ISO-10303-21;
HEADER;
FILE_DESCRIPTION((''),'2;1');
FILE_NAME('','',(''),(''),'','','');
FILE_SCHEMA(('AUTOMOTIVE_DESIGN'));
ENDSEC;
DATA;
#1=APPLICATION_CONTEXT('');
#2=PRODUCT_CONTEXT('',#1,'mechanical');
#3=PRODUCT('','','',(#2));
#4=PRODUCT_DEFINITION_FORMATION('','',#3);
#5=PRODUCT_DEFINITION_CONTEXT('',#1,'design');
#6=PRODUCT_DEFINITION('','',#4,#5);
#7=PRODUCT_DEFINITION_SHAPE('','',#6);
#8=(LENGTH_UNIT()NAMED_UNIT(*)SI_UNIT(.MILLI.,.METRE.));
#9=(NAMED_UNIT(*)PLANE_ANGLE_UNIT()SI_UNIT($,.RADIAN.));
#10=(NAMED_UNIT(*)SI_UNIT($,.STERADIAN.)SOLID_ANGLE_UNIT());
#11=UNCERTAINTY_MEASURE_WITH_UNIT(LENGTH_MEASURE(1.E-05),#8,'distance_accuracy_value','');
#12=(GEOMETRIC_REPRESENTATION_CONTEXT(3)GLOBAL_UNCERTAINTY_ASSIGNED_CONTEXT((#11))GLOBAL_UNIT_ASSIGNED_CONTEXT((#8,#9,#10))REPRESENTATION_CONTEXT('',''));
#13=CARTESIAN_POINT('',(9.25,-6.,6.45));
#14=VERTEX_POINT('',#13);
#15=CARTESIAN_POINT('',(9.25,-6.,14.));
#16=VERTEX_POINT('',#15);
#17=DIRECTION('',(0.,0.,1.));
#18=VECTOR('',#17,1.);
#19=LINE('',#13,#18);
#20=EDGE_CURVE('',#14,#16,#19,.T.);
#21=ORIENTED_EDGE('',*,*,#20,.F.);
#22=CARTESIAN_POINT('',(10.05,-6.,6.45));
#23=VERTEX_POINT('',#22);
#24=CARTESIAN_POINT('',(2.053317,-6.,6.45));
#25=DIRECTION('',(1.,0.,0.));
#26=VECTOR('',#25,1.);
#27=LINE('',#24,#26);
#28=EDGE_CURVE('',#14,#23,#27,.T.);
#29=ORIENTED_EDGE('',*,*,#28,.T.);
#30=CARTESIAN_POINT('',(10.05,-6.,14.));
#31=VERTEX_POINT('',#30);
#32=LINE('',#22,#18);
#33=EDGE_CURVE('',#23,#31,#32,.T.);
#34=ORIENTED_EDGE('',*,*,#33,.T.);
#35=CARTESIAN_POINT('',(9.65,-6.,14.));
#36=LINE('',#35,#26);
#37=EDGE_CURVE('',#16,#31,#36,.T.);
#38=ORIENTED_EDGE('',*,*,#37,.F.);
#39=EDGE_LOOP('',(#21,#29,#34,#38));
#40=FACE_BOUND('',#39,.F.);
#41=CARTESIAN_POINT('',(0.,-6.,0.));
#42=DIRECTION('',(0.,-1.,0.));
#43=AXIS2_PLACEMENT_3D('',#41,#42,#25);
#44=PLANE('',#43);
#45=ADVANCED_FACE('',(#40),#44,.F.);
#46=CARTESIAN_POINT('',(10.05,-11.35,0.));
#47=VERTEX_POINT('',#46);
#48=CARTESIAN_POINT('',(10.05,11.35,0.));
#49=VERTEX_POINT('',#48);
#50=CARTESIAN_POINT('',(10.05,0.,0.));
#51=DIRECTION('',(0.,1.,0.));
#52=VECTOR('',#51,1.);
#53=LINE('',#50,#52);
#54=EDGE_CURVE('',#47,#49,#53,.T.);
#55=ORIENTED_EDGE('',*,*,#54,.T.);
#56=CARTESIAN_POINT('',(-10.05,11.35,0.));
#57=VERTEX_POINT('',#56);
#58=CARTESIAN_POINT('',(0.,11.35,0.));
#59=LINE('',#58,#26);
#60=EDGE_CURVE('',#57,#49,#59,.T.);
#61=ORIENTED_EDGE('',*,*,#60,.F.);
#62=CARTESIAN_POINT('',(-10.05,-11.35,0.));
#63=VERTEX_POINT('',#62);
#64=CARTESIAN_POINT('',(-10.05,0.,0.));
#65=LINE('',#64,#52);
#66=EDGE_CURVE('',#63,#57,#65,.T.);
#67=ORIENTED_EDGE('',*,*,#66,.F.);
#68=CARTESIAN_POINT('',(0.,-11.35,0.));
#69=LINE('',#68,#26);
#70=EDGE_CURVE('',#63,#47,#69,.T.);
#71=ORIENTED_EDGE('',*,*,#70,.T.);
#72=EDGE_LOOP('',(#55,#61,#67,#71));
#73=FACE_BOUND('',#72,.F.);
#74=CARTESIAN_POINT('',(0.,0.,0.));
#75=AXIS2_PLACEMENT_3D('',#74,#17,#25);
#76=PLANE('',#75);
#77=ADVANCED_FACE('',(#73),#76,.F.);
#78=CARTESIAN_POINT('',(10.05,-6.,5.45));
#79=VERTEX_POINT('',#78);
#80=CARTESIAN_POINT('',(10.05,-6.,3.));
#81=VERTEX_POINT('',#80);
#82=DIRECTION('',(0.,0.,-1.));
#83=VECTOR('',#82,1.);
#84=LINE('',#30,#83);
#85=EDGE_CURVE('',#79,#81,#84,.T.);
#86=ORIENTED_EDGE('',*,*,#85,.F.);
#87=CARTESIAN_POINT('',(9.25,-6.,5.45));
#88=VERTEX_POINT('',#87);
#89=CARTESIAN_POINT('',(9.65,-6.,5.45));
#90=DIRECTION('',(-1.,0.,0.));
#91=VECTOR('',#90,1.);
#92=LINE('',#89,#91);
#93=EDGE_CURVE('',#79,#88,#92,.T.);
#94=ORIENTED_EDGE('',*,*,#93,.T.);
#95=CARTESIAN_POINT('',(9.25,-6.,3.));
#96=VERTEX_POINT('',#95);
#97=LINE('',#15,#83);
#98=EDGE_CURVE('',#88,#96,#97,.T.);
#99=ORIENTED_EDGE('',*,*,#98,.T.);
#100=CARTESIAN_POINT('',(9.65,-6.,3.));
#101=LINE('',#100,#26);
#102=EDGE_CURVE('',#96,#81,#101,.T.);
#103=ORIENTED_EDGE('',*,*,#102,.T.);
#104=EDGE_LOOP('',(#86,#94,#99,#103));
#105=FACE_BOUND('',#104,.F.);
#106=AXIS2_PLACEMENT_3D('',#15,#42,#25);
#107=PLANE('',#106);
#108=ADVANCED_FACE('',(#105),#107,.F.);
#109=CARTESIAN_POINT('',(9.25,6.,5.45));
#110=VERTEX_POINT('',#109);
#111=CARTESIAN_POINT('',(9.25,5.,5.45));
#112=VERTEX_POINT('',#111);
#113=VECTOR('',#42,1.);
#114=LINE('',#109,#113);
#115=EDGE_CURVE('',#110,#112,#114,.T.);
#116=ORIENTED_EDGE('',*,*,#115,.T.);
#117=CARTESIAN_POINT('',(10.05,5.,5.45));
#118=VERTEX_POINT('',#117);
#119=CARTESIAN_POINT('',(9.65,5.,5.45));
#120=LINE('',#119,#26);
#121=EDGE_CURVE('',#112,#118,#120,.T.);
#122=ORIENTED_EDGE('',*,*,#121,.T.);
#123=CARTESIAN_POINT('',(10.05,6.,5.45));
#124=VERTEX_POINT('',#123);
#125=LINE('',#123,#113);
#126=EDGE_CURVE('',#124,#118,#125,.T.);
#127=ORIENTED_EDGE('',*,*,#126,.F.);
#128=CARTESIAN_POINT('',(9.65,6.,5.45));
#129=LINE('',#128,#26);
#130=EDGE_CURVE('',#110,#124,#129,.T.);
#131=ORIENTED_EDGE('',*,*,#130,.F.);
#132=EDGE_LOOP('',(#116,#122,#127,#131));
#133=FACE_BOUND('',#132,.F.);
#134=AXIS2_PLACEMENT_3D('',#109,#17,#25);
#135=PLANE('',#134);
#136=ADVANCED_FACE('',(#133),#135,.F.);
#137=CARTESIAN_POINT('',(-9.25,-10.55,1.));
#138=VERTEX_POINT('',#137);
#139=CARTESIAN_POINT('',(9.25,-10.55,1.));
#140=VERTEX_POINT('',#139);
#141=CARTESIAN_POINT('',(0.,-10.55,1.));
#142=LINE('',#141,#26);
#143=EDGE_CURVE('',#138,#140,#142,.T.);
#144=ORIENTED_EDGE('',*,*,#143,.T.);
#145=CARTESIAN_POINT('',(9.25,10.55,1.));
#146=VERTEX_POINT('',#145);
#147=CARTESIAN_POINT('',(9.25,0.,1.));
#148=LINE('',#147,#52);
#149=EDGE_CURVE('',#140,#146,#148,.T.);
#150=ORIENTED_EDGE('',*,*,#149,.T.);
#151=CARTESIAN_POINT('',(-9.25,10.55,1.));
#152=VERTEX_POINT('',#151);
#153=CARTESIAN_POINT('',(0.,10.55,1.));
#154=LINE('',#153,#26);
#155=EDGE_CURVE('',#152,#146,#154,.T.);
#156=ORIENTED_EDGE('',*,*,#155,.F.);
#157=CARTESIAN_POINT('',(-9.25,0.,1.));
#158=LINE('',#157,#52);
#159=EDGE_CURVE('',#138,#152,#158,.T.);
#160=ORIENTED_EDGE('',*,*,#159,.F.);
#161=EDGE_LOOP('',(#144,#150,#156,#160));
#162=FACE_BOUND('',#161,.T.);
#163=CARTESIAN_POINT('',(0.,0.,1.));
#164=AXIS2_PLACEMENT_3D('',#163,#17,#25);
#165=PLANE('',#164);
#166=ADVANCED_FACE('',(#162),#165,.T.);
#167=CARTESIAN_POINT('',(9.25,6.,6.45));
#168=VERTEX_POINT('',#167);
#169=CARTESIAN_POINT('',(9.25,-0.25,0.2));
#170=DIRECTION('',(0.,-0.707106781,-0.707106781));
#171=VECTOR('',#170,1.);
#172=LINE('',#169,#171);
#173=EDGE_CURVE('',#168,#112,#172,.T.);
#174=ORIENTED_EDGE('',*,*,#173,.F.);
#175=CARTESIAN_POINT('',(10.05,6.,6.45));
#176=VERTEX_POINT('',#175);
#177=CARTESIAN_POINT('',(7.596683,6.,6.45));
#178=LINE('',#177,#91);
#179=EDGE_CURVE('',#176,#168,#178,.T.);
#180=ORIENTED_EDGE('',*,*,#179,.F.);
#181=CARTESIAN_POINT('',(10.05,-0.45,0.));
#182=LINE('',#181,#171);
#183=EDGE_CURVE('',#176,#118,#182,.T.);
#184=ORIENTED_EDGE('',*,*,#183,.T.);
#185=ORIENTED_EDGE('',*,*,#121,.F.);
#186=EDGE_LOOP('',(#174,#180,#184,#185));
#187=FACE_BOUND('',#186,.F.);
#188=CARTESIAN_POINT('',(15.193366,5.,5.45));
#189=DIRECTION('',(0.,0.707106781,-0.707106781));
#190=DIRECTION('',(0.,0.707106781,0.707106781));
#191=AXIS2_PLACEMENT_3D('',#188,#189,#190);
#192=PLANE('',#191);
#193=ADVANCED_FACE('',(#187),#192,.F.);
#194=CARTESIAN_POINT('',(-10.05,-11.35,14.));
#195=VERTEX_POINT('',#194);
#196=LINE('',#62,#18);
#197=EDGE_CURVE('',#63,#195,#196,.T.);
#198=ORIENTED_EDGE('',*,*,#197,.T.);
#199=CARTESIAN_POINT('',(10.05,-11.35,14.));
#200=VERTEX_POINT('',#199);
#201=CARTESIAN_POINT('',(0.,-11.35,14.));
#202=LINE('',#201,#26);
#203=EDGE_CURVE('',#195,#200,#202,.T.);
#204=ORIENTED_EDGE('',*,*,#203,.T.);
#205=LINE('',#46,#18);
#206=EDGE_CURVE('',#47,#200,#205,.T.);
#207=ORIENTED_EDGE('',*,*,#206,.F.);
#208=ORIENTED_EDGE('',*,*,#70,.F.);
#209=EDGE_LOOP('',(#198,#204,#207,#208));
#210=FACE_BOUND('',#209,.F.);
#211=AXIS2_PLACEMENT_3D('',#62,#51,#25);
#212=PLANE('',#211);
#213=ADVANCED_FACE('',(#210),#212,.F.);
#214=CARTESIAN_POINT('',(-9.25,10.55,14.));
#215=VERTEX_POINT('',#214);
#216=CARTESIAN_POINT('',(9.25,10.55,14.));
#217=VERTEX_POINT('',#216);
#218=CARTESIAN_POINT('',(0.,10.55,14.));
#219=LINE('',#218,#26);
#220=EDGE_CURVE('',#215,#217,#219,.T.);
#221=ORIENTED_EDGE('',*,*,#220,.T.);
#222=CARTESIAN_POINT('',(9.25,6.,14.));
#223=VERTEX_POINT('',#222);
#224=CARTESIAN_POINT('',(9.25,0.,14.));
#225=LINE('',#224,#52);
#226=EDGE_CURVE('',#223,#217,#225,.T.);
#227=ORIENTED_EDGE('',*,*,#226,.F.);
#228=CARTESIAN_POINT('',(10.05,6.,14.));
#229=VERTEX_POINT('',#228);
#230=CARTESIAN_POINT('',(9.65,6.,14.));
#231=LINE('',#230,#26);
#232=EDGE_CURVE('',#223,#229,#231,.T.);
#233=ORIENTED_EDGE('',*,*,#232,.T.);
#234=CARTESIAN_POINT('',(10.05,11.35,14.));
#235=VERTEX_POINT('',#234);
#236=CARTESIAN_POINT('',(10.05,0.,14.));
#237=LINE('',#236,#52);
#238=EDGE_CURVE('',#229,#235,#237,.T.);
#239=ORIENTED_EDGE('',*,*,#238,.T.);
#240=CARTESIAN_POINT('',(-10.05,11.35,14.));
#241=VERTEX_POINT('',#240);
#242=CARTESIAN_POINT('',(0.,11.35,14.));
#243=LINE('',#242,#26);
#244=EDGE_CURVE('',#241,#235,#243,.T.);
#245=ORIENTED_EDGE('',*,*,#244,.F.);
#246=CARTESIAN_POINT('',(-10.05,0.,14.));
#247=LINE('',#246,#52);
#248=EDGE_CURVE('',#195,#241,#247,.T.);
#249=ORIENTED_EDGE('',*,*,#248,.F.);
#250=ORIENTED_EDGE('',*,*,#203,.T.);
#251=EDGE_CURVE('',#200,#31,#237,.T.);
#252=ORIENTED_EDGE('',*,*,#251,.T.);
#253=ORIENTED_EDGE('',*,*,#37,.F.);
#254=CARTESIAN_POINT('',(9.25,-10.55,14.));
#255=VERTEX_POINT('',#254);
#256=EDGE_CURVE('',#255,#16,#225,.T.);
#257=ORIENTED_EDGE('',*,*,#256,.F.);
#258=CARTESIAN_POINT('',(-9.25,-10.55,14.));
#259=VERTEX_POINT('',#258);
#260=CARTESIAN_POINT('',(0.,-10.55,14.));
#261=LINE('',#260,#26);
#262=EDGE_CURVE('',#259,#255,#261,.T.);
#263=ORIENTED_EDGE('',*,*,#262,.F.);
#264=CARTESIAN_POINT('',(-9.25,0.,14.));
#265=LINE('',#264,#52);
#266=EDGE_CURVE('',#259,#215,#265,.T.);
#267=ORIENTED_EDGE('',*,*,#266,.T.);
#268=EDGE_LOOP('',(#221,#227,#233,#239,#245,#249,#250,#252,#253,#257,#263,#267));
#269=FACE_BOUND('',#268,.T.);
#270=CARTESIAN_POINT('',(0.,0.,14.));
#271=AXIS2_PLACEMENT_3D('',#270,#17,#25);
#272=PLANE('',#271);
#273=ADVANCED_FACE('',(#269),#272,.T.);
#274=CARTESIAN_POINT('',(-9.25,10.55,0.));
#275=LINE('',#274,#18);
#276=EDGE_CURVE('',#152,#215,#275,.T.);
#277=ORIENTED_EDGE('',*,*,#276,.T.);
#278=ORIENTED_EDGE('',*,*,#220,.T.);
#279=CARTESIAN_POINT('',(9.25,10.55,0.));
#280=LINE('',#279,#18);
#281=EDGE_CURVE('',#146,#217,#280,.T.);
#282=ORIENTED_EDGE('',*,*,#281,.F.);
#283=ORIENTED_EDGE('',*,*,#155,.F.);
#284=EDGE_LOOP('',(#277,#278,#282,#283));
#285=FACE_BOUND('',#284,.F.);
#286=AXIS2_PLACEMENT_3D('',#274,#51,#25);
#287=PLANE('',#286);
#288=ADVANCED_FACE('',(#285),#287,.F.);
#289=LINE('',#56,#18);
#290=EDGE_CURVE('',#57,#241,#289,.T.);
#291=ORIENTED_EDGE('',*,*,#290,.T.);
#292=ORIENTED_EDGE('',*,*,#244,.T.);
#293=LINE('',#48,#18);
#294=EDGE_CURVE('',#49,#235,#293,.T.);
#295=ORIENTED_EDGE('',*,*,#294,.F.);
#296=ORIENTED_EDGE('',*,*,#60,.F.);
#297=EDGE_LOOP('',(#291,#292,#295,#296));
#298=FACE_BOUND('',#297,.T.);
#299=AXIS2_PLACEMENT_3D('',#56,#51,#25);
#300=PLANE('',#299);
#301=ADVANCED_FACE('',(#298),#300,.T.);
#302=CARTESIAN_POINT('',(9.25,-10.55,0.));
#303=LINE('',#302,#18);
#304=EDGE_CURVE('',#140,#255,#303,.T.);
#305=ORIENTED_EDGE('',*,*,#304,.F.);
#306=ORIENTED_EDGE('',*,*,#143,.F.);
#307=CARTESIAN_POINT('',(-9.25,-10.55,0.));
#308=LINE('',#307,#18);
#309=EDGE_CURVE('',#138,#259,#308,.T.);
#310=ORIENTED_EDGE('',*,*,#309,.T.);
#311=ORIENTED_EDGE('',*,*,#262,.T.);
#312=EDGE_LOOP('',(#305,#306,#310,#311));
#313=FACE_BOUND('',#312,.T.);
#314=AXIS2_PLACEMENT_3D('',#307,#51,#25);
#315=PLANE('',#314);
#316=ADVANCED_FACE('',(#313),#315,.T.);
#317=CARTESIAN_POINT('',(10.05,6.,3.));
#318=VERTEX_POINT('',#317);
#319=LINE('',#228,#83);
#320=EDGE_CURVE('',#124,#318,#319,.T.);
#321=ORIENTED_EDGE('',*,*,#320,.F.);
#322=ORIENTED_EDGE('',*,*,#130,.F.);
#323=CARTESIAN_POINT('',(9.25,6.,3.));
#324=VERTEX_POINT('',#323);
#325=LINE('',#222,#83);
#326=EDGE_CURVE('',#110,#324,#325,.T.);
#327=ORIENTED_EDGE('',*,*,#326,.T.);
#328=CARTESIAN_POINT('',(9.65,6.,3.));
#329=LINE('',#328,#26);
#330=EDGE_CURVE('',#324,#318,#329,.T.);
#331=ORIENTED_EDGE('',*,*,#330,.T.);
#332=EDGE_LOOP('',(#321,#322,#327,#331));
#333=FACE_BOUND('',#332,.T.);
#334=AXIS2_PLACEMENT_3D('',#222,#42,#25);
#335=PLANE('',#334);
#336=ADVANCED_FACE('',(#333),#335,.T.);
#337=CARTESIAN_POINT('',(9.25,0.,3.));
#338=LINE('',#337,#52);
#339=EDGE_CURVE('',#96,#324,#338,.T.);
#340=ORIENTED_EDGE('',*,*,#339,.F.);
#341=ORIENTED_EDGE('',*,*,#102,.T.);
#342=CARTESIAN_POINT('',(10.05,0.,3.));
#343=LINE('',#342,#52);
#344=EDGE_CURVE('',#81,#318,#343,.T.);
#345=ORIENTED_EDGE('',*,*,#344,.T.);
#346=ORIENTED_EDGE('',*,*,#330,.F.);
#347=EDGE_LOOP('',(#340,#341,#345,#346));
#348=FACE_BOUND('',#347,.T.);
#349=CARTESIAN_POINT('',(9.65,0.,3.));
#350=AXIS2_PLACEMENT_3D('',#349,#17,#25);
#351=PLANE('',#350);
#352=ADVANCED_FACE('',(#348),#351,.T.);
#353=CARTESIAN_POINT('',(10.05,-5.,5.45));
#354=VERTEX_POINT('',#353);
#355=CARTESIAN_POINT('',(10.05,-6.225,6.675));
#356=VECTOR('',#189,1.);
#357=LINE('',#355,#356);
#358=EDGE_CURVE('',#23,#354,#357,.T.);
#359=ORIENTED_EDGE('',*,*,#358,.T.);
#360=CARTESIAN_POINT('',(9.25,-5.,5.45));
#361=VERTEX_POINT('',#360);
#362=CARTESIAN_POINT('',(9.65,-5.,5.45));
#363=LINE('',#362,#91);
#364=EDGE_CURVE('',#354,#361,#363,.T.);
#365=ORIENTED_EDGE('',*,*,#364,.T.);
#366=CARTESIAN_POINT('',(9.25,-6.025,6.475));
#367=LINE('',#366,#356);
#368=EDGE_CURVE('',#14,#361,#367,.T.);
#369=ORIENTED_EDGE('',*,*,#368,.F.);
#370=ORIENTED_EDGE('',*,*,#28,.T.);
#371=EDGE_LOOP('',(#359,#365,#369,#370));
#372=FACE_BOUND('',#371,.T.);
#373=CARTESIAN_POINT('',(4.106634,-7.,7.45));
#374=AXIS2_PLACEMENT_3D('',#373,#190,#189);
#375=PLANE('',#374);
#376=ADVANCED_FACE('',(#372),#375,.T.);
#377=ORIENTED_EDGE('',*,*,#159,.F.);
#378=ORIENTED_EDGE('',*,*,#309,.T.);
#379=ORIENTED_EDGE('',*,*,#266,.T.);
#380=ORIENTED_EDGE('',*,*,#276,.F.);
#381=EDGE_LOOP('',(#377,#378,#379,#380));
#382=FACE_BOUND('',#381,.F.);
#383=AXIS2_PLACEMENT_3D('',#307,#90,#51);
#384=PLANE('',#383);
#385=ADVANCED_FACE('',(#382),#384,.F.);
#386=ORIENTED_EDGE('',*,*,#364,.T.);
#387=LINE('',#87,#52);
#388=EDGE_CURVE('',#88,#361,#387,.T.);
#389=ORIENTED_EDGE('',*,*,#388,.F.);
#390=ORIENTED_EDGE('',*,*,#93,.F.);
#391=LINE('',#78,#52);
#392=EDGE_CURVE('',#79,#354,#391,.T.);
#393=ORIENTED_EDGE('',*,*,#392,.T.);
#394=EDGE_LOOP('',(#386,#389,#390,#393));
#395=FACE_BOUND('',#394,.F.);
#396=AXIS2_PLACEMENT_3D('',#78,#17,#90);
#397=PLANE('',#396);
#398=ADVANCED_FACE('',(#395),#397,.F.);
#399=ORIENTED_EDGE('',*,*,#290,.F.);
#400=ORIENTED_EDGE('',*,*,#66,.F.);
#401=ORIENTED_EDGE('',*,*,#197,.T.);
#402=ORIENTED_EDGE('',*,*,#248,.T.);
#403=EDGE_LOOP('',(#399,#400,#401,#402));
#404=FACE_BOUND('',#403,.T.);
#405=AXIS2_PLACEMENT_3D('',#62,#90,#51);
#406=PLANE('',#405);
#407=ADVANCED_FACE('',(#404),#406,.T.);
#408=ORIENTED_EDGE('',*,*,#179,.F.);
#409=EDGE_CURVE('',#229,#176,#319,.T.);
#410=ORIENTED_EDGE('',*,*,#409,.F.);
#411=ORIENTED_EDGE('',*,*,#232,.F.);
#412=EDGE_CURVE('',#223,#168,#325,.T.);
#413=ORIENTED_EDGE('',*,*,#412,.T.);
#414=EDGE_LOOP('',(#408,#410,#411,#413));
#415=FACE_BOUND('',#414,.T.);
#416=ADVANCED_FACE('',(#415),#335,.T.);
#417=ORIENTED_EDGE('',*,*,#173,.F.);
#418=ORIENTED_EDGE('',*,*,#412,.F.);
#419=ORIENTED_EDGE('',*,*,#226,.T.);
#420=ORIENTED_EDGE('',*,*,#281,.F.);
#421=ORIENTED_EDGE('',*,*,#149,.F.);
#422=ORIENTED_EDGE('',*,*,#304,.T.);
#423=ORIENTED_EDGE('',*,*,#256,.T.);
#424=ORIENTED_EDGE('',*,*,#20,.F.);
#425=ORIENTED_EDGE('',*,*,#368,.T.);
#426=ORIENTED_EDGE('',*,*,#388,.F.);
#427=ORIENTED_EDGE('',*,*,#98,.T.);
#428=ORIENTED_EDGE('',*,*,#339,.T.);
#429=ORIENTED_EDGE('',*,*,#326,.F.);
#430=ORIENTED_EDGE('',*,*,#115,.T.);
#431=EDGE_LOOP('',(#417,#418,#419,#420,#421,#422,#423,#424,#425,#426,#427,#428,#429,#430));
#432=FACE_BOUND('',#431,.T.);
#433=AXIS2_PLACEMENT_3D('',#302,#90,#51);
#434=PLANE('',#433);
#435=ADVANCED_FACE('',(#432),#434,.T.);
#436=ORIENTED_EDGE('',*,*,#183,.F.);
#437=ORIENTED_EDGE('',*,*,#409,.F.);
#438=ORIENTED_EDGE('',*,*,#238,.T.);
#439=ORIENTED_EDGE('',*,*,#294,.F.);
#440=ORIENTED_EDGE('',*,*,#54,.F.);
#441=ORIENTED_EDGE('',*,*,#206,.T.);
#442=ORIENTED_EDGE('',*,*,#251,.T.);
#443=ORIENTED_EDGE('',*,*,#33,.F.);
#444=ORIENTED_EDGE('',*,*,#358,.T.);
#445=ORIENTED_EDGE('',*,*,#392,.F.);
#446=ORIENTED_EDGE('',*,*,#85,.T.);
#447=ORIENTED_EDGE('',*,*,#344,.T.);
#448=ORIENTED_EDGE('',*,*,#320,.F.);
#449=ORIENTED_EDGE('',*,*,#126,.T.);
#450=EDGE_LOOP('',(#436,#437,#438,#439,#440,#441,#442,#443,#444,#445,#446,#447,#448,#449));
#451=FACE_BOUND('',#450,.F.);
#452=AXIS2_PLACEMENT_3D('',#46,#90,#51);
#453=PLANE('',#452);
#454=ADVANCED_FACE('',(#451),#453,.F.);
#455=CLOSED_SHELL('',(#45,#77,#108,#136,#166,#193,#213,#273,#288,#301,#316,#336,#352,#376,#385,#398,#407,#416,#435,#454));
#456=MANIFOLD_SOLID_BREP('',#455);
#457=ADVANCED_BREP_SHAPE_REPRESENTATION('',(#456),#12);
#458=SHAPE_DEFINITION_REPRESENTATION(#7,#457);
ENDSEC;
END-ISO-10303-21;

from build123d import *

# Parameters (mm, degrees)
F0_W        = 20.1
F0_H        = 22.7
F0_W_2      = 18.5
F0_H_2      = 21.1
F1_DEPTH    = 14
F2_DEPTH    = 1
F3_W        = 0.8
F3_H        = 12
F4_DEPTH    = 11
F5_W        = 0.8
F5_H        = 2
F6_DEPTH    = 1
F7_W        = 0.8
F7_H        = 2
F8_DEPTH    = 1
F9_T4_DEPTH = 11.0867319519
F9_T9_DEPTH = 11.0867319519


# Not quite as in the source:
# - a fillet or chamfer that OpenCascade refuses, or shapes differently, is made with other operations: its cross-section is extruded or revolved along the edge and cut away or added


with BuildPart() as f1:
    # F0 (on Top) → F1 (new body)
    with BuildSketch(Plane.XY):
        Rectangle(F0_W, F0_H)
        Rectangle(F0_W_2, F0_H_2, mode=Mode.SUBTRACT)
    extrude(amount=F1_DEPTH)

    # F0 (on Top) → F2 (join)
    with BuildSketch(Plane.XY):
        Rectangle(F0_W_2, F0_H_2)
    extrude(amount=F2_DEPTH)

    # F3 (on face) → F4 (cut)
    with BuildSketch(Plane.XY.offset(14)):
        with Locations((9.65, 0)):
            Rectangle(F3_W, F3_H)
    extrude(amount=-F4_DEPTH, mode=Mode.SUBTRACT)

    # F5 (on face) → F6 (join)
    with BuildSketch(Plane.XZ.offset(-6)):
        with Locations((9.65, 6.45)):
            Rectangle(F5_W, F5_H)
    extrude(amount=F6_DEPTH)

    # F7 (on face) → F8 (join)
    with BuildSketch(Plane(origin=(0, -6, 0), x_dir=(-1, 0, 0), z_dir=(0, 1, 0))):
        with Locations((-9.65, 6.45)):
            Rectangle(F7_W, F7_H)
    extrude(amount=F8_DEPTH)

    # F9: chamfer of 2 on 2 edges, made by hand


with BuildPart() as f9_tool2:
    # F9_s3 → F9_t4 (new body)
    with BuildSketch(Plane.YZ.offset(15.1933659759)):
        Polygon((5, 5.45), (7, 7.45), (5, 7.45), align=None)
    extrude(amount=-F9_T4_DEPTH)

    split(bisect_by=Plane.XZ.offset(-6), keep=Keep.TOP)


with BuildPart() as f1_1:
    add(f1.part)

    # F9_t1: cut F9_tool2
    add(f9_tool2.part, mode=Mode.SUBTRACT)


with BuildPart() as f9_tool7:
    # F9_s8 → F9_t9 (new body)
    with BuildSketch(Plane.YZ.offset(4.1066340241)):
        Polygon((-7, 7.45), (-5, 5.45), (-5, 7.45), align=None)
    extrude(amount=F9_T9_DEPTH)

    split(bisect_by=Plane.XZ.offset(6), keep=Keep.BOTTOM)


with BuildPart() as f1_2:
    add(f1_1.part)

    # F9_t6: cut F9_tool7
    add(f9_tool7.part, mode=Mode.SUBTRACT)


solid = f1_2.part
